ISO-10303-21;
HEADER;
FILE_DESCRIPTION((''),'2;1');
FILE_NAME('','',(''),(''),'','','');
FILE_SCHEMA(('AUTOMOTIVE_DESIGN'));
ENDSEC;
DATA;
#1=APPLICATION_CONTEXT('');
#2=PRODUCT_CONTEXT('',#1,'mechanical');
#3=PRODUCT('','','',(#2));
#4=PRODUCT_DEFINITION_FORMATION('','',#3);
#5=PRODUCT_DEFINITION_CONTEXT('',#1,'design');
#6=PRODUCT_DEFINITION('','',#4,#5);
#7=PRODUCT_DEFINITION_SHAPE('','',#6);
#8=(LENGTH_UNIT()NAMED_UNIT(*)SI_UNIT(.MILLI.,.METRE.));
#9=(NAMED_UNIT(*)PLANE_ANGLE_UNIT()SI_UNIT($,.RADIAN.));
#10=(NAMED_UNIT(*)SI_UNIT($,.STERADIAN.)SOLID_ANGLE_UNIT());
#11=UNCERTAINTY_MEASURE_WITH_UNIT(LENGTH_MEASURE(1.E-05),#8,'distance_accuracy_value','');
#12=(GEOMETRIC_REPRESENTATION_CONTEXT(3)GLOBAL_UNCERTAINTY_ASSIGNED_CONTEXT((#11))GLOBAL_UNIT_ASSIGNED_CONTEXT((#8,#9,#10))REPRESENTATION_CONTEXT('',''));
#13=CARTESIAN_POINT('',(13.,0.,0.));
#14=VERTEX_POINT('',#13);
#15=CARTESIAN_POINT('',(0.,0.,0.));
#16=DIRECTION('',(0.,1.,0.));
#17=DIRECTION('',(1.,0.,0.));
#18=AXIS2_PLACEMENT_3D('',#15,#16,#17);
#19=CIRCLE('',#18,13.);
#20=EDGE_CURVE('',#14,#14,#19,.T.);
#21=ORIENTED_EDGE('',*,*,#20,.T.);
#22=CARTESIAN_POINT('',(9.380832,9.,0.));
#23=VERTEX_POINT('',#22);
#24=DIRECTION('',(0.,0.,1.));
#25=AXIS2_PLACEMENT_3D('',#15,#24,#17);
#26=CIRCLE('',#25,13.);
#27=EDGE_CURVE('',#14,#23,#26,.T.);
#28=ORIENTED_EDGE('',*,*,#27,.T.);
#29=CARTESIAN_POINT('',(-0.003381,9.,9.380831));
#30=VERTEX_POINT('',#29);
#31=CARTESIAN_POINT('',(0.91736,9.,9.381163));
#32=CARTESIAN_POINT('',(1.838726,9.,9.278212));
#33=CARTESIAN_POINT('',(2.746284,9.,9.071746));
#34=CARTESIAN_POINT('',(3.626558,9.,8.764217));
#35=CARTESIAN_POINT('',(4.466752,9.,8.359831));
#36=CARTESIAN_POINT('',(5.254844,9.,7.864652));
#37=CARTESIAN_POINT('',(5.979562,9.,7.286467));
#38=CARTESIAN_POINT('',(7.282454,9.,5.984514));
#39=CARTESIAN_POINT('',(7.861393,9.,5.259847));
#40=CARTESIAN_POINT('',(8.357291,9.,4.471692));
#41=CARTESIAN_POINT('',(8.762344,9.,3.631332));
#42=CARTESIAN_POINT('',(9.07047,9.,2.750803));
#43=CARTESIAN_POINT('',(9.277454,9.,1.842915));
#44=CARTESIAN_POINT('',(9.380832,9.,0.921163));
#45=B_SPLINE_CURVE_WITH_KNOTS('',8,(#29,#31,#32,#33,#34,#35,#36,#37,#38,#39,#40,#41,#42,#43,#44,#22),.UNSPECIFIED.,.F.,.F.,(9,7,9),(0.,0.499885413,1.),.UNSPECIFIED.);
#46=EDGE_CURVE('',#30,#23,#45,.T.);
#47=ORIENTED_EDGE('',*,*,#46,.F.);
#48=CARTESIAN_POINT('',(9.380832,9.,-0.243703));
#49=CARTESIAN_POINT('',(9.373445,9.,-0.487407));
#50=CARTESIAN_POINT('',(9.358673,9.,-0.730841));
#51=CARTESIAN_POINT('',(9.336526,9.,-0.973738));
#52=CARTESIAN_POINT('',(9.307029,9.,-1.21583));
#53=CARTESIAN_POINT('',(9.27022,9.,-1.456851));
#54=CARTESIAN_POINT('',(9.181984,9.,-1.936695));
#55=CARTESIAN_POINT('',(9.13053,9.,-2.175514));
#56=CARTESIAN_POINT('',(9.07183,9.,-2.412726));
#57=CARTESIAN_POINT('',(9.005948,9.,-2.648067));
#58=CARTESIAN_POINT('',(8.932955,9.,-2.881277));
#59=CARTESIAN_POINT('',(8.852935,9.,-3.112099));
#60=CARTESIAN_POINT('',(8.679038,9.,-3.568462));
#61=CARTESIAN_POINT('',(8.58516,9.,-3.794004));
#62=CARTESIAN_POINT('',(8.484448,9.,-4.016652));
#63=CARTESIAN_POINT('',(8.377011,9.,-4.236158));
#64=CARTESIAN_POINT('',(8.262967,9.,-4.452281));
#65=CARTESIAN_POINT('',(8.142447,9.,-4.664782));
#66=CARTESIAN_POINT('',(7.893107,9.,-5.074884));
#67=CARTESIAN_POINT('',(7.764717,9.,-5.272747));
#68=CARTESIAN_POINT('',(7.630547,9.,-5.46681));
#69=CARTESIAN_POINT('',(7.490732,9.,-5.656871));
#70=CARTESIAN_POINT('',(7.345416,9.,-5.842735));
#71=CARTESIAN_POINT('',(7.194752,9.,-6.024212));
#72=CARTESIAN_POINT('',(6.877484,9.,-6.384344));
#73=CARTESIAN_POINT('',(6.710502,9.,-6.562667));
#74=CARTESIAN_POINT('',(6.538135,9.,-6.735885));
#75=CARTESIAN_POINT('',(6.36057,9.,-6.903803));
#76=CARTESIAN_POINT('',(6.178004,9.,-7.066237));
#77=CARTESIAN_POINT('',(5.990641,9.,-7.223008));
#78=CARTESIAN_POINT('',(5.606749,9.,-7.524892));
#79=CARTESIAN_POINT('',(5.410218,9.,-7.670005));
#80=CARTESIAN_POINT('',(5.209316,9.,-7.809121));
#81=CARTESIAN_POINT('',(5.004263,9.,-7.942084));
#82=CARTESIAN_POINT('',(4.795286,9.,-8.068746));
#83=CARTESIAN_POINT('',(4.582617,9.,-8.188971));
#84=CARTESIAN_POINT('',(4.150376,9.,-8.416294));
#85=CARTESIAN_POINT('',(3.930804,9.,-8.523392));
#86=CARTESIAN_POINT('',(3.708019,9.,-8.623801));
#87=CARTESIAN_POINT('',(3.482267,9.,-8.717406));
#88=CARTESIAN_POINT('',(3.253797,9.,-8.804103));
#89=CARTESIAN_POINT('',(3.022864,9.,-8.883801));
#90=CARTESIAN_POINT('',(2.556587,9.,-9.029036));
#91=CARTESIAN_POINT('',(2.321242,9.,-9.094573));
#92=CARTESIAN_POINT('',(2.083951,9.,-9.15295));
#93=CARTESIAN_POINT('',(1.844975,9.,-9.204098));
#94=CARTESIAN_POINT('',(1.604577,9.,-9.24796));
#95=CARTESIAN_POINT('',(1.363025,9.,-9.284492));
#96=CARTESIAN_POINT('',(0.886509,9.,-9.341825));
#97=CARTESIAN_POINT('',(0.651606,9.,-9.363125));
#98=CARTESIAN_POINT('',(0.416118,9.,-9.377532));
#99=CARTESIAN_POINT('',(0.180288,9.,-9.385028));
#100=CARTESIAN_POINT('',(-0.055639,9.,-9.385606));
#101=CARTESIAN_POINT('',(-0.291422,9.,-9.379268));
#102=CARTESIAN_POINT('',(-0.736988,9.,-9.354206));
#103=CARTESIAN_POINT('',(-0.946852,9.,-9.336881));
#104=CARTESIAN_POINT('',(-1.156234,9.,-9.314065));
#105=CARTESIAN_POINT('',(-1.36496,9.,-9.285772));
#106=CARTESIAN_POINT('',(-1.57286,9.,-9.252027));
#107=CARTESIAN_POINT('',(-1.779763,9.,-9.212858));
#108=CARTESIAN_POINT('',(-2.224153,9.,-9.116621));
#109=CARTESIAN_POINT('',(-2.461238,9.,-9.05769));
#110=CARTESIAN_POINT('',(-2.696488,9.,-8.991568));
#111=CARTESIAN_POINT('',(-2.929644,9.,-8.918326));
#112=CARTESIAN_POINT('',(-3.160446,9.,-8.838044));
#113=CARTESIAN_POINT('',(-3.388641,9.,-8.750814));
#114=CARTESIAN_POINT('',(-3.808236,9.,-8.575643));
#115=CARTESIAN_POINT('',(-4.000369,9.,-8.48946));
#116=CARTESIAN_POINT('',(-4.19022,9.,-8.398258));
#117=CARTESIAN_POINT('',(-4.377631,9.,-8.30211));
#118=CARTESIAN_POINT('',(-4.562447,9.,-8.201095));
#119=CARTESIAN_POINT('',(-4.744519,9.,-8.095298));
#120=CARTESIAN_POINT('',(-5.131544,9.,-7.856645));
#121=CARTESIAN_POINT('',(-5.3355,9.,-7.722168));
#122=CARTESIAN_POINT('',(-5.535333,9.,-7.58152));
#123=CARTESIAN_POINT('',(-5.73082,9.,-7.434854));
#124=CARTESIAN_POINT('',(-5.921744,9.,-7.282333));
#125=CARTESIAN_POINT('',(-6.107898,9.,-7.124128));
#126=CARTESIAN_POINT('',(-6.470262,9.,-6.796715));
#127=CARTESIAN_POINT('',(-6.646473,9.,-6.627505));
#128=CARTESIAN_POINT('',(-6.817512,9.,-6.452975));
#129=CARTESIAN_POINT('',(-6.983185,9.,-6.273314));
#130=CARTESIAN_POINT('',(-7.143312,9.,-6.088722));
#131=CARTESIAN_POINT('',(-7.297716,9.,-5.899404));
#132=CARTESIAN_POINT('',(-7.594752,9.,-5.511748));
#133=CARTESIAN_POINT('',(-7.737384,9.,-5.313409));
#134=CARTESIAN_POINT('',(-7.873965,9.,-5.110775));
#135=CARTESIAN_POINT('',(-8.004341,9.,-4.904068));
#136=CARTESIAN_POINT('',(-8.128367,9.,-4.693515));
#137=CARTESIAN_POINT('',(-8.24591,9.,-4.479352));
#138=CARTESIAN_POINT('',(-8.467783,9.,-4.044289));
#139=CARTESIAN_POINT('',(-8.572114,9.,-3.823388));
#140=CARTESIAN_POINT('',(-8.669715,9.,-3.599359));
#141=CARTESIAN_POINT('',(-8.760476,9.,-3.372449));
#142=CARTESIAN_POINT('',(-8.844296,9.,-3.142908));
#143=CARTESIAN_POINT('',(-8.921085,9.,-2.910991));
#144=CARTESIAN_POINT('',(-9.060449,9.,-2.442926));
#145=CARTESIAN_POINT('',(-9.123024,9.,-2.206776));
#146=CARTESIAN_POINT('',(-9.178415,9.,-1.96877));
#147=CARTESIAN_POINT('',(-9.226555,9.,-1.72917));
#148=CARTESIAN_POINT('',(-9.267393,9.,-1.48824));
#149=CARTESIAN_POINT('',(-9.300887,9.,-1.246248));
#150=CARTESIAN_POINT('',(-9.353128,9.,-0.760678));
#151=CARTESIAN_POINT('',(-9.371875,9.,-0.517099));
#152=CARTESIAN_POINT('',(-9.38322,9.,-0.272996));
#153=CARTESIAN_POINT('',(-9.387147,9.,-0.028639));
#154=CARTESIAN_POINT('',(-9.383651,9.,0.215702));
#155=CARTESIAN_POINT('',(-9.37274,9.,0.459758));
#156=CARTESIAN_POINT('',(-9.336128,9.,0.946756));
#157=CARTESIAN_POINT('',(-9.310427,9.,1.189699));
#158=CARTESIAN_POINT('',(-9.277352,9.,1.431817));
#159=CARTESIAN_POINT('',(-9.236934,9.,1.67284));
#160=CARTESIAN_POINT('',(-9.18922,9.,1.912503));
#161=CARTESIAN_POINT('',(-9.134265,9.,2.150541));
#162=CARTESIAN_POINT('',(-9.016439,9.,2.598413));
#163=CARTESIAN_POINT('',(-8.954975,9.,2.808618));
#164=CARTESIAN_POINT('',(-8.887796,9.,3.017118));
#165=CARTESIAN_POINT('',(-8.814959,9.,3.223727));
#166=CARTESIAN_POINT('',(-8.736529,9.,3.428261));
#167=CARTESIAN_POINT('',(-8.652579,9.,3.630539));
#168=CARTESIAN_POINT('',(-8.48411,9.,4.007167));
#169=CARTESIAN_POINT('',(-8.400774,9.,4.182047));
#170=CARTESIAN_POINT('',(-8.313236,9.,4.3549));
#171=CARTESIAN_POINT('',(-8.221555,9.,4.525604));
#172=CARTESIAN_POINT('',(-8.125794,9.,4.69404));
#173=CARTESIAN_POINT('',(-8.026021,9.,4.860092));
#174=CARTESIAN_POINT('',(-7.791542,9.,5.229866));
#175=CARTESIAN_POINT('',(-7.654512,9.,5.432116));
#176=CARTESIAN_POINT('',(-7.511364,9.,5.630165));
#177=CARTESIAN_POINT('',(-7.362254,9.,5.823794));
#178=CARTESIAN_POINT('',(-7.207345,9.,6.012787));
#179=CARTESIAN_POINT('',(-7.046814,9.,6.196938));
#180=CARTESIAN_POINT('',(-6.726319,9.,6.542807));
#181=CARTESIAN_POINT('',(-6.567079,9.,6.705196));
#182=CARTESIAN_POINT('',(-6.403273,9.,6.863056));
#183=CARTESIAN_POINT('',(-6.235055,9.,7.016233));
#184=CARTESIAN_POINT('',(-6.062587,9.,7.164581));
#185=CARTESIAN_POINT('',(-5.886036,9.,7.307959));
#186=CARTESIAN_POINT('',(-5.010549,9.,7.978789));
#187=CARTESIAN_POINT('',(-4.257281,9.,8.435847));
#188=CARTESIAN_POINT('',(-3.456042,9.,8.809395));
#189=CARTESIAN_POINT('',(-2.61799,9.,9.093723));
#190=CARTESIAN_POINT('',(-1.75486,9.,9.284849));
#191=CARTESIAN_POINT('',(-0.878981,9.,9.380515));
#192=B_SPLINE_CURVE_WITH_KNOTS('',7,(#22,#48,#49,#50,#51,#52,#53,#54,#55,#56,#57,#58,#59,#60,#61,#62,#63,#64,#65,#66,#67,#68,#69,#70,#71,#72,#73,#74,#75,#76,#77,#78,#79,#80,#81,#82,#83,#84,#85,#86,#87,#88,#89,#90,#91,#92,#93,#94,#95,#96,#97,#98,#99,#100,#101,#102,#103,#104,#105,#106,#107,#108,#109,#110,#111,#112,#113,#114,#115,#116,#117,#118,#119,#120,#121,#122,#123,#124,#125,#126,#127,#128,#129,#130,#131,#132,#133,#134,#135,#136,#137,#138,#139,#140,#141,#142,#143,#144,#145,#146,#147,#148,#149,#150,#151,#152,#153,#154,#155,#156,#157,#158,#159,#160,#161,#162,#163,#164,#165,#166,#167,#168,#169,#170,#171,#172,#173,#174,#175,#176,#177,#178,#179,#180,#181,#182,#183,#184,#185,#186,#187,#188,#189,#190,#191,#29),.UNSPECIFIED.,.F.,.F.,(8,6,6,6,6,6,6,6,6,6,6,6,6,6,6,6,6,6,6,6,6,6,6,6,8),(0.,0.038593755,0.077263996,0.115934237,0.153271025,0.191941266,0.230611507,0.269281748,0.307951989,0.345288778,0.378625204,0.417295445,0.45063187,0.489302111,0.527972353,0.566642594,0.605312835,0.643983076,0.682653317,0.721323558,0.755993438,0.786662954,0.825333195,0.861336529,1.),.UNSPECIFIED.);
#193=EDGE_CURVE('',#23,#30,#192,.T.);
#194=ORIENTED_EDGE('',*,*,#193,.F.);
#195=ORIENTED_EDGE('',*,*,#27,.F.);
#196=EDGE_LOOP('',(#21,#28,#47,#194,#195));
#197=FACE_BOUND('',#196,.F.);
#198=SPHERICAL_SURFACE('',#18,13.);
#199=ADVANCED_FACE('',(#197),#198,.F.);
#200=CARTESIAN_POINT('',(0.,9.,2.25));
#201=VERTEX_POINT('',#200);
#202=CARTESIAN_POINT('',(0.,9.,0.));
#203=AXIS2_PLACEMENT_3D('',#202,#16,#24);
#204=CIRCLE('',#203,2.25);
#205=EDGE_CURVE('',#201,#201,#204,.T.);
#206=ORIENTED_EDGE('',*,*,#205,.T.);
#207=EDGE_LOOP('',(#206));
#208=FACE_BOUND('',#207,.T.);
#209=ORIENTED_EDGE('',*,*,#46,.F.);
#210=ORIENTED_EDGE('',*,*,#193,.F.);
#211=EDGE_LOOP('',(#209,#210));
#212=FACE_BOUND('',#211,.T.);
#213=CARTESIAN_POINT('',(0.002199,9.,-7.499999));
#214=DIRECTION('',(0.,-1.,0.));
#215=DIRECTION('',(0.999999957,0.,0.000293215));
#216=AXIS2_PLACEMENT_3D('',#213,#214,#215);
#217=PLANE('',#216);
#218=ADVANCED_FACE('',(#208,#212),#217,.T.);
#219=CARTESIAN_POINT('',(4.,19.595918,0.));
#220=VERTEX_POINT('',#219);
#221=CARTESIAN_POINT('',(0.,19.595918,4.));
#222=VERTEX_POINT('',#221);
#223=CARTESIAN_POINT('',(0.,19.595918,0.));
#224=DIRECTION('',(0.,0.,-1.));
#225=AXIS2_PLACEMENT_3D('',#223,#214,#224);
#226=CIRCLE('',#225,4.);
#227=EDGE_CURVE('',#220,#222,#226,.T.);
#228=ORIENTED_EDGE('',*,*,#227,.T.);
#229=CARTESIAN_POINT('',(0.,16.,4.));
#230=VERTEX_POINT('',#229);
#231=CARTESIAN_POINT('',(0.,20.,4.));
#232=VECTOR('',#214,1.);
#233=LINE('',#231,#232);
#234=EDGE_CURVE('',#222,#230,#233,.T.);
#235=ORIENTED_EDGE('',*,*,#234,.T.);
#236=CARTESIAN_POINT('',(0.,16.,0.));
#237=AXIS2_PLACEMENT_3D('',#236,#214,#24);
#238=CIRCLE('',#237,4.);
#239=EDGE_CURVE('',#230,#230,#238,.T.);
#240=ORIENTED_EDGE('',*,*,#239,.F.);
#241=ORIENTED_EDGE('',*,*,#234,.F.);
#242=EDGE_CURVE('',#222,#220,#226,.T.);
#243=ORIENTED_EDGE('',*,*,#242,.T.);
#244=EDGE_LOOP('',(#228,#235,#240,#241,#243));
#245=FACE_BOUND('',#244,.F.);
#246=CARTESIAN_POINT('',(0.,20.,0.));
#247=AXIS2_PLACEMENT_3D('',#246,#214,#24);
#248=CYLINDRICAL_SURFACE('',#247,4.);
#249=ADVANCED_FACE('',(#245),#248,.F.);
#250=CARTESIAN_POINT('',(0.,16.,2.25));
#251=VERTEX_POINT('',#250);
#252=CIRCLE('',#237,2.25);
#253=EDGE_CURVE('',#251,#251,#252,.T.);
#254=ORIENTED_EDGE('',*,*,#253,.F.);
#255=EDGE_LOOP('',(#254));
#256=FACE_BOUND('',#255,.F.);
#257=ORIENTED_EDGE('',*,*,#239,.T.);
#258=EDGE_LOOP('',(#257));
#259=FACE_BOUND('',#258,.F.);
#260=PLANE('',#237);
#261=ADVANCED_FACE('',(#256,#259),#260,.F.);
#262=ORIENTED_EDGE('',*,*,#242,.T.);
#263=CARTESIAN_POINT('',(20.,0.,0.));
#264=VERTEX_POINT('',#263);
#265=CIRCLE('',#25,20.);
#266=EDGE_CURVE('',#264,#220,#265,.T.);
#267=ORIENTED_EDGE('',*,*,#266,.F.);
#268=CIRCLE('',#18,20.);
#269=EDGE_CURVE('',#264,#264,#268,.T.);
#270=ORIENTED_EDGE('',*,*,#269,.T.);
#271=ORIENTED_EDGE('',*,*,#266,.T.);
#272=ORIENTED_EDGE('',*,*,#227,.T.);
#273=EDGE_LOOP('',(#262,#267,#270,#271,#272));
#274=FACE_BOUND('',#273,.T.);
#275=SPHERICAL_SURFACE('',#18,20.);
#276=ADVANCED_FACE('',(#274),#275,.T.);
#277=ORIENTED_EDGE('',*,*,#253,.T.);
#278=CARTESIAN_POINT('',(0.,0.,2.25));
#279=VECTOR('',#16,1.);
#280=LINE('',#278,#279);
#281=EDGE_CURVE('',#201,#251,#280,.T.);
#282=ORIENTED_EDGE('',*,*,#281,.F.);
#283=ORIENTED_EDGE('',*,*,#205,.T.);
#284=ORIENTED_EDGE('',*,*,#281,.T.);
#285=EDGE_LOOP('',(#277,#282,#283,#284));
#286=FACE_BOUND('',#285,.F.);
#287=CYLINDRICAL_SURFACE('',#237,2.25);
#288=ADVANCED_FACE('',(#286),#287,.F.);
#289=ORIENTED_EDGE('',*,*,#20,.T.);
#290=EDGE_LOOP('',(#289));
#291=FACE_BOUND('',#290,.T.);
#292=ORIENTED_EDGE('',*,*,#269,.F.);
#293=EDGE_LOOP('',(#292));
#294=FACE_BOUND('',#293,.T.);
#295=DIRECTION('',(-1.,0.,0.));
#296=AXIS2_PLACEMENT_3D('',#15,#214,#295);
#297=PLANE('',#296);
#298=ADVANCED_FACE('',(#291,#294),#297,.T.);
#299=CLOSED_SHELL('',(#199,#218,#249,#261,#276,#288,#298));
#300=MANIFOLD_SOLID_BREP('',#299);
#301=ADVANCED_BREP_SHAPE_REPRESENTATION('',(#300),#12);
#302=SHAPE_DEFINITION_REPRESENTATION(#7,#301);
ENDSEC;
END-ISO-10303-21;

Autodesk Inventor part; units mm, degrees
ref_plane "YZ Plane" through (0, 0, 0) normal (1, 0, 0) x (0, 1, 0)
ref_plane "XY Plane" through (0, 0, 0) normal (0, 0, 1) x (1, 0, 0)
sketch "Sketch1" plane through (0, 0, 0) normal (0, 0, 1) x (1, 0, 0)
  line L0 (0, 0) -> (0, 20)
  line L1 (0, 0) -> (20, 0)
  arc A0 (20, 0) -> (0, 20) centre (0, 0) ccw
  line L2 (0, -4.8284) -> (0, 28.9706) projected
  dimension "d2" = 20
revolve "Revolution1" add sketch "Sketch1" angle 360 about axis through (0, -10, 0) along (0, 1, 0)
ref_plane "Work Plane1" through (0, 20, 0) normal (0, 1, 0) x (-1, 0, 0)
sketch "Sketch2" plane through (0, 20, 0) normal (0, 1, 0) x (-1, 0, 0)
  point P0 (0, 0)
  point P1 (0, 0)
hole "Hole1" at (0, 20, 0) direction (0, -1, 0) diameter 4.5 end through all counterbore diameter 8 counterbore depth 4 clearance for "Socket Head Cap Screw" size "M4" standard "Ansi Metric M Profile"
shell "Shell1" thickness 7 removed faces 1 at (13.8841, 0, 1.6858)
sketch "Sketch3" plane through (0, 0, 0) normal (0, -1, 0) x (1, 0, 0)
  circle A0 centre (0, 0) radius 9.25 projected
  circle A1 centre (0, 0) radius 2.25 projected
extrude "Extrusion1" cut sketch "Sketch3" against normal up to surface (9 mm away)
properties part number "Ball_Upper Half" material "Nylon 6/6"
